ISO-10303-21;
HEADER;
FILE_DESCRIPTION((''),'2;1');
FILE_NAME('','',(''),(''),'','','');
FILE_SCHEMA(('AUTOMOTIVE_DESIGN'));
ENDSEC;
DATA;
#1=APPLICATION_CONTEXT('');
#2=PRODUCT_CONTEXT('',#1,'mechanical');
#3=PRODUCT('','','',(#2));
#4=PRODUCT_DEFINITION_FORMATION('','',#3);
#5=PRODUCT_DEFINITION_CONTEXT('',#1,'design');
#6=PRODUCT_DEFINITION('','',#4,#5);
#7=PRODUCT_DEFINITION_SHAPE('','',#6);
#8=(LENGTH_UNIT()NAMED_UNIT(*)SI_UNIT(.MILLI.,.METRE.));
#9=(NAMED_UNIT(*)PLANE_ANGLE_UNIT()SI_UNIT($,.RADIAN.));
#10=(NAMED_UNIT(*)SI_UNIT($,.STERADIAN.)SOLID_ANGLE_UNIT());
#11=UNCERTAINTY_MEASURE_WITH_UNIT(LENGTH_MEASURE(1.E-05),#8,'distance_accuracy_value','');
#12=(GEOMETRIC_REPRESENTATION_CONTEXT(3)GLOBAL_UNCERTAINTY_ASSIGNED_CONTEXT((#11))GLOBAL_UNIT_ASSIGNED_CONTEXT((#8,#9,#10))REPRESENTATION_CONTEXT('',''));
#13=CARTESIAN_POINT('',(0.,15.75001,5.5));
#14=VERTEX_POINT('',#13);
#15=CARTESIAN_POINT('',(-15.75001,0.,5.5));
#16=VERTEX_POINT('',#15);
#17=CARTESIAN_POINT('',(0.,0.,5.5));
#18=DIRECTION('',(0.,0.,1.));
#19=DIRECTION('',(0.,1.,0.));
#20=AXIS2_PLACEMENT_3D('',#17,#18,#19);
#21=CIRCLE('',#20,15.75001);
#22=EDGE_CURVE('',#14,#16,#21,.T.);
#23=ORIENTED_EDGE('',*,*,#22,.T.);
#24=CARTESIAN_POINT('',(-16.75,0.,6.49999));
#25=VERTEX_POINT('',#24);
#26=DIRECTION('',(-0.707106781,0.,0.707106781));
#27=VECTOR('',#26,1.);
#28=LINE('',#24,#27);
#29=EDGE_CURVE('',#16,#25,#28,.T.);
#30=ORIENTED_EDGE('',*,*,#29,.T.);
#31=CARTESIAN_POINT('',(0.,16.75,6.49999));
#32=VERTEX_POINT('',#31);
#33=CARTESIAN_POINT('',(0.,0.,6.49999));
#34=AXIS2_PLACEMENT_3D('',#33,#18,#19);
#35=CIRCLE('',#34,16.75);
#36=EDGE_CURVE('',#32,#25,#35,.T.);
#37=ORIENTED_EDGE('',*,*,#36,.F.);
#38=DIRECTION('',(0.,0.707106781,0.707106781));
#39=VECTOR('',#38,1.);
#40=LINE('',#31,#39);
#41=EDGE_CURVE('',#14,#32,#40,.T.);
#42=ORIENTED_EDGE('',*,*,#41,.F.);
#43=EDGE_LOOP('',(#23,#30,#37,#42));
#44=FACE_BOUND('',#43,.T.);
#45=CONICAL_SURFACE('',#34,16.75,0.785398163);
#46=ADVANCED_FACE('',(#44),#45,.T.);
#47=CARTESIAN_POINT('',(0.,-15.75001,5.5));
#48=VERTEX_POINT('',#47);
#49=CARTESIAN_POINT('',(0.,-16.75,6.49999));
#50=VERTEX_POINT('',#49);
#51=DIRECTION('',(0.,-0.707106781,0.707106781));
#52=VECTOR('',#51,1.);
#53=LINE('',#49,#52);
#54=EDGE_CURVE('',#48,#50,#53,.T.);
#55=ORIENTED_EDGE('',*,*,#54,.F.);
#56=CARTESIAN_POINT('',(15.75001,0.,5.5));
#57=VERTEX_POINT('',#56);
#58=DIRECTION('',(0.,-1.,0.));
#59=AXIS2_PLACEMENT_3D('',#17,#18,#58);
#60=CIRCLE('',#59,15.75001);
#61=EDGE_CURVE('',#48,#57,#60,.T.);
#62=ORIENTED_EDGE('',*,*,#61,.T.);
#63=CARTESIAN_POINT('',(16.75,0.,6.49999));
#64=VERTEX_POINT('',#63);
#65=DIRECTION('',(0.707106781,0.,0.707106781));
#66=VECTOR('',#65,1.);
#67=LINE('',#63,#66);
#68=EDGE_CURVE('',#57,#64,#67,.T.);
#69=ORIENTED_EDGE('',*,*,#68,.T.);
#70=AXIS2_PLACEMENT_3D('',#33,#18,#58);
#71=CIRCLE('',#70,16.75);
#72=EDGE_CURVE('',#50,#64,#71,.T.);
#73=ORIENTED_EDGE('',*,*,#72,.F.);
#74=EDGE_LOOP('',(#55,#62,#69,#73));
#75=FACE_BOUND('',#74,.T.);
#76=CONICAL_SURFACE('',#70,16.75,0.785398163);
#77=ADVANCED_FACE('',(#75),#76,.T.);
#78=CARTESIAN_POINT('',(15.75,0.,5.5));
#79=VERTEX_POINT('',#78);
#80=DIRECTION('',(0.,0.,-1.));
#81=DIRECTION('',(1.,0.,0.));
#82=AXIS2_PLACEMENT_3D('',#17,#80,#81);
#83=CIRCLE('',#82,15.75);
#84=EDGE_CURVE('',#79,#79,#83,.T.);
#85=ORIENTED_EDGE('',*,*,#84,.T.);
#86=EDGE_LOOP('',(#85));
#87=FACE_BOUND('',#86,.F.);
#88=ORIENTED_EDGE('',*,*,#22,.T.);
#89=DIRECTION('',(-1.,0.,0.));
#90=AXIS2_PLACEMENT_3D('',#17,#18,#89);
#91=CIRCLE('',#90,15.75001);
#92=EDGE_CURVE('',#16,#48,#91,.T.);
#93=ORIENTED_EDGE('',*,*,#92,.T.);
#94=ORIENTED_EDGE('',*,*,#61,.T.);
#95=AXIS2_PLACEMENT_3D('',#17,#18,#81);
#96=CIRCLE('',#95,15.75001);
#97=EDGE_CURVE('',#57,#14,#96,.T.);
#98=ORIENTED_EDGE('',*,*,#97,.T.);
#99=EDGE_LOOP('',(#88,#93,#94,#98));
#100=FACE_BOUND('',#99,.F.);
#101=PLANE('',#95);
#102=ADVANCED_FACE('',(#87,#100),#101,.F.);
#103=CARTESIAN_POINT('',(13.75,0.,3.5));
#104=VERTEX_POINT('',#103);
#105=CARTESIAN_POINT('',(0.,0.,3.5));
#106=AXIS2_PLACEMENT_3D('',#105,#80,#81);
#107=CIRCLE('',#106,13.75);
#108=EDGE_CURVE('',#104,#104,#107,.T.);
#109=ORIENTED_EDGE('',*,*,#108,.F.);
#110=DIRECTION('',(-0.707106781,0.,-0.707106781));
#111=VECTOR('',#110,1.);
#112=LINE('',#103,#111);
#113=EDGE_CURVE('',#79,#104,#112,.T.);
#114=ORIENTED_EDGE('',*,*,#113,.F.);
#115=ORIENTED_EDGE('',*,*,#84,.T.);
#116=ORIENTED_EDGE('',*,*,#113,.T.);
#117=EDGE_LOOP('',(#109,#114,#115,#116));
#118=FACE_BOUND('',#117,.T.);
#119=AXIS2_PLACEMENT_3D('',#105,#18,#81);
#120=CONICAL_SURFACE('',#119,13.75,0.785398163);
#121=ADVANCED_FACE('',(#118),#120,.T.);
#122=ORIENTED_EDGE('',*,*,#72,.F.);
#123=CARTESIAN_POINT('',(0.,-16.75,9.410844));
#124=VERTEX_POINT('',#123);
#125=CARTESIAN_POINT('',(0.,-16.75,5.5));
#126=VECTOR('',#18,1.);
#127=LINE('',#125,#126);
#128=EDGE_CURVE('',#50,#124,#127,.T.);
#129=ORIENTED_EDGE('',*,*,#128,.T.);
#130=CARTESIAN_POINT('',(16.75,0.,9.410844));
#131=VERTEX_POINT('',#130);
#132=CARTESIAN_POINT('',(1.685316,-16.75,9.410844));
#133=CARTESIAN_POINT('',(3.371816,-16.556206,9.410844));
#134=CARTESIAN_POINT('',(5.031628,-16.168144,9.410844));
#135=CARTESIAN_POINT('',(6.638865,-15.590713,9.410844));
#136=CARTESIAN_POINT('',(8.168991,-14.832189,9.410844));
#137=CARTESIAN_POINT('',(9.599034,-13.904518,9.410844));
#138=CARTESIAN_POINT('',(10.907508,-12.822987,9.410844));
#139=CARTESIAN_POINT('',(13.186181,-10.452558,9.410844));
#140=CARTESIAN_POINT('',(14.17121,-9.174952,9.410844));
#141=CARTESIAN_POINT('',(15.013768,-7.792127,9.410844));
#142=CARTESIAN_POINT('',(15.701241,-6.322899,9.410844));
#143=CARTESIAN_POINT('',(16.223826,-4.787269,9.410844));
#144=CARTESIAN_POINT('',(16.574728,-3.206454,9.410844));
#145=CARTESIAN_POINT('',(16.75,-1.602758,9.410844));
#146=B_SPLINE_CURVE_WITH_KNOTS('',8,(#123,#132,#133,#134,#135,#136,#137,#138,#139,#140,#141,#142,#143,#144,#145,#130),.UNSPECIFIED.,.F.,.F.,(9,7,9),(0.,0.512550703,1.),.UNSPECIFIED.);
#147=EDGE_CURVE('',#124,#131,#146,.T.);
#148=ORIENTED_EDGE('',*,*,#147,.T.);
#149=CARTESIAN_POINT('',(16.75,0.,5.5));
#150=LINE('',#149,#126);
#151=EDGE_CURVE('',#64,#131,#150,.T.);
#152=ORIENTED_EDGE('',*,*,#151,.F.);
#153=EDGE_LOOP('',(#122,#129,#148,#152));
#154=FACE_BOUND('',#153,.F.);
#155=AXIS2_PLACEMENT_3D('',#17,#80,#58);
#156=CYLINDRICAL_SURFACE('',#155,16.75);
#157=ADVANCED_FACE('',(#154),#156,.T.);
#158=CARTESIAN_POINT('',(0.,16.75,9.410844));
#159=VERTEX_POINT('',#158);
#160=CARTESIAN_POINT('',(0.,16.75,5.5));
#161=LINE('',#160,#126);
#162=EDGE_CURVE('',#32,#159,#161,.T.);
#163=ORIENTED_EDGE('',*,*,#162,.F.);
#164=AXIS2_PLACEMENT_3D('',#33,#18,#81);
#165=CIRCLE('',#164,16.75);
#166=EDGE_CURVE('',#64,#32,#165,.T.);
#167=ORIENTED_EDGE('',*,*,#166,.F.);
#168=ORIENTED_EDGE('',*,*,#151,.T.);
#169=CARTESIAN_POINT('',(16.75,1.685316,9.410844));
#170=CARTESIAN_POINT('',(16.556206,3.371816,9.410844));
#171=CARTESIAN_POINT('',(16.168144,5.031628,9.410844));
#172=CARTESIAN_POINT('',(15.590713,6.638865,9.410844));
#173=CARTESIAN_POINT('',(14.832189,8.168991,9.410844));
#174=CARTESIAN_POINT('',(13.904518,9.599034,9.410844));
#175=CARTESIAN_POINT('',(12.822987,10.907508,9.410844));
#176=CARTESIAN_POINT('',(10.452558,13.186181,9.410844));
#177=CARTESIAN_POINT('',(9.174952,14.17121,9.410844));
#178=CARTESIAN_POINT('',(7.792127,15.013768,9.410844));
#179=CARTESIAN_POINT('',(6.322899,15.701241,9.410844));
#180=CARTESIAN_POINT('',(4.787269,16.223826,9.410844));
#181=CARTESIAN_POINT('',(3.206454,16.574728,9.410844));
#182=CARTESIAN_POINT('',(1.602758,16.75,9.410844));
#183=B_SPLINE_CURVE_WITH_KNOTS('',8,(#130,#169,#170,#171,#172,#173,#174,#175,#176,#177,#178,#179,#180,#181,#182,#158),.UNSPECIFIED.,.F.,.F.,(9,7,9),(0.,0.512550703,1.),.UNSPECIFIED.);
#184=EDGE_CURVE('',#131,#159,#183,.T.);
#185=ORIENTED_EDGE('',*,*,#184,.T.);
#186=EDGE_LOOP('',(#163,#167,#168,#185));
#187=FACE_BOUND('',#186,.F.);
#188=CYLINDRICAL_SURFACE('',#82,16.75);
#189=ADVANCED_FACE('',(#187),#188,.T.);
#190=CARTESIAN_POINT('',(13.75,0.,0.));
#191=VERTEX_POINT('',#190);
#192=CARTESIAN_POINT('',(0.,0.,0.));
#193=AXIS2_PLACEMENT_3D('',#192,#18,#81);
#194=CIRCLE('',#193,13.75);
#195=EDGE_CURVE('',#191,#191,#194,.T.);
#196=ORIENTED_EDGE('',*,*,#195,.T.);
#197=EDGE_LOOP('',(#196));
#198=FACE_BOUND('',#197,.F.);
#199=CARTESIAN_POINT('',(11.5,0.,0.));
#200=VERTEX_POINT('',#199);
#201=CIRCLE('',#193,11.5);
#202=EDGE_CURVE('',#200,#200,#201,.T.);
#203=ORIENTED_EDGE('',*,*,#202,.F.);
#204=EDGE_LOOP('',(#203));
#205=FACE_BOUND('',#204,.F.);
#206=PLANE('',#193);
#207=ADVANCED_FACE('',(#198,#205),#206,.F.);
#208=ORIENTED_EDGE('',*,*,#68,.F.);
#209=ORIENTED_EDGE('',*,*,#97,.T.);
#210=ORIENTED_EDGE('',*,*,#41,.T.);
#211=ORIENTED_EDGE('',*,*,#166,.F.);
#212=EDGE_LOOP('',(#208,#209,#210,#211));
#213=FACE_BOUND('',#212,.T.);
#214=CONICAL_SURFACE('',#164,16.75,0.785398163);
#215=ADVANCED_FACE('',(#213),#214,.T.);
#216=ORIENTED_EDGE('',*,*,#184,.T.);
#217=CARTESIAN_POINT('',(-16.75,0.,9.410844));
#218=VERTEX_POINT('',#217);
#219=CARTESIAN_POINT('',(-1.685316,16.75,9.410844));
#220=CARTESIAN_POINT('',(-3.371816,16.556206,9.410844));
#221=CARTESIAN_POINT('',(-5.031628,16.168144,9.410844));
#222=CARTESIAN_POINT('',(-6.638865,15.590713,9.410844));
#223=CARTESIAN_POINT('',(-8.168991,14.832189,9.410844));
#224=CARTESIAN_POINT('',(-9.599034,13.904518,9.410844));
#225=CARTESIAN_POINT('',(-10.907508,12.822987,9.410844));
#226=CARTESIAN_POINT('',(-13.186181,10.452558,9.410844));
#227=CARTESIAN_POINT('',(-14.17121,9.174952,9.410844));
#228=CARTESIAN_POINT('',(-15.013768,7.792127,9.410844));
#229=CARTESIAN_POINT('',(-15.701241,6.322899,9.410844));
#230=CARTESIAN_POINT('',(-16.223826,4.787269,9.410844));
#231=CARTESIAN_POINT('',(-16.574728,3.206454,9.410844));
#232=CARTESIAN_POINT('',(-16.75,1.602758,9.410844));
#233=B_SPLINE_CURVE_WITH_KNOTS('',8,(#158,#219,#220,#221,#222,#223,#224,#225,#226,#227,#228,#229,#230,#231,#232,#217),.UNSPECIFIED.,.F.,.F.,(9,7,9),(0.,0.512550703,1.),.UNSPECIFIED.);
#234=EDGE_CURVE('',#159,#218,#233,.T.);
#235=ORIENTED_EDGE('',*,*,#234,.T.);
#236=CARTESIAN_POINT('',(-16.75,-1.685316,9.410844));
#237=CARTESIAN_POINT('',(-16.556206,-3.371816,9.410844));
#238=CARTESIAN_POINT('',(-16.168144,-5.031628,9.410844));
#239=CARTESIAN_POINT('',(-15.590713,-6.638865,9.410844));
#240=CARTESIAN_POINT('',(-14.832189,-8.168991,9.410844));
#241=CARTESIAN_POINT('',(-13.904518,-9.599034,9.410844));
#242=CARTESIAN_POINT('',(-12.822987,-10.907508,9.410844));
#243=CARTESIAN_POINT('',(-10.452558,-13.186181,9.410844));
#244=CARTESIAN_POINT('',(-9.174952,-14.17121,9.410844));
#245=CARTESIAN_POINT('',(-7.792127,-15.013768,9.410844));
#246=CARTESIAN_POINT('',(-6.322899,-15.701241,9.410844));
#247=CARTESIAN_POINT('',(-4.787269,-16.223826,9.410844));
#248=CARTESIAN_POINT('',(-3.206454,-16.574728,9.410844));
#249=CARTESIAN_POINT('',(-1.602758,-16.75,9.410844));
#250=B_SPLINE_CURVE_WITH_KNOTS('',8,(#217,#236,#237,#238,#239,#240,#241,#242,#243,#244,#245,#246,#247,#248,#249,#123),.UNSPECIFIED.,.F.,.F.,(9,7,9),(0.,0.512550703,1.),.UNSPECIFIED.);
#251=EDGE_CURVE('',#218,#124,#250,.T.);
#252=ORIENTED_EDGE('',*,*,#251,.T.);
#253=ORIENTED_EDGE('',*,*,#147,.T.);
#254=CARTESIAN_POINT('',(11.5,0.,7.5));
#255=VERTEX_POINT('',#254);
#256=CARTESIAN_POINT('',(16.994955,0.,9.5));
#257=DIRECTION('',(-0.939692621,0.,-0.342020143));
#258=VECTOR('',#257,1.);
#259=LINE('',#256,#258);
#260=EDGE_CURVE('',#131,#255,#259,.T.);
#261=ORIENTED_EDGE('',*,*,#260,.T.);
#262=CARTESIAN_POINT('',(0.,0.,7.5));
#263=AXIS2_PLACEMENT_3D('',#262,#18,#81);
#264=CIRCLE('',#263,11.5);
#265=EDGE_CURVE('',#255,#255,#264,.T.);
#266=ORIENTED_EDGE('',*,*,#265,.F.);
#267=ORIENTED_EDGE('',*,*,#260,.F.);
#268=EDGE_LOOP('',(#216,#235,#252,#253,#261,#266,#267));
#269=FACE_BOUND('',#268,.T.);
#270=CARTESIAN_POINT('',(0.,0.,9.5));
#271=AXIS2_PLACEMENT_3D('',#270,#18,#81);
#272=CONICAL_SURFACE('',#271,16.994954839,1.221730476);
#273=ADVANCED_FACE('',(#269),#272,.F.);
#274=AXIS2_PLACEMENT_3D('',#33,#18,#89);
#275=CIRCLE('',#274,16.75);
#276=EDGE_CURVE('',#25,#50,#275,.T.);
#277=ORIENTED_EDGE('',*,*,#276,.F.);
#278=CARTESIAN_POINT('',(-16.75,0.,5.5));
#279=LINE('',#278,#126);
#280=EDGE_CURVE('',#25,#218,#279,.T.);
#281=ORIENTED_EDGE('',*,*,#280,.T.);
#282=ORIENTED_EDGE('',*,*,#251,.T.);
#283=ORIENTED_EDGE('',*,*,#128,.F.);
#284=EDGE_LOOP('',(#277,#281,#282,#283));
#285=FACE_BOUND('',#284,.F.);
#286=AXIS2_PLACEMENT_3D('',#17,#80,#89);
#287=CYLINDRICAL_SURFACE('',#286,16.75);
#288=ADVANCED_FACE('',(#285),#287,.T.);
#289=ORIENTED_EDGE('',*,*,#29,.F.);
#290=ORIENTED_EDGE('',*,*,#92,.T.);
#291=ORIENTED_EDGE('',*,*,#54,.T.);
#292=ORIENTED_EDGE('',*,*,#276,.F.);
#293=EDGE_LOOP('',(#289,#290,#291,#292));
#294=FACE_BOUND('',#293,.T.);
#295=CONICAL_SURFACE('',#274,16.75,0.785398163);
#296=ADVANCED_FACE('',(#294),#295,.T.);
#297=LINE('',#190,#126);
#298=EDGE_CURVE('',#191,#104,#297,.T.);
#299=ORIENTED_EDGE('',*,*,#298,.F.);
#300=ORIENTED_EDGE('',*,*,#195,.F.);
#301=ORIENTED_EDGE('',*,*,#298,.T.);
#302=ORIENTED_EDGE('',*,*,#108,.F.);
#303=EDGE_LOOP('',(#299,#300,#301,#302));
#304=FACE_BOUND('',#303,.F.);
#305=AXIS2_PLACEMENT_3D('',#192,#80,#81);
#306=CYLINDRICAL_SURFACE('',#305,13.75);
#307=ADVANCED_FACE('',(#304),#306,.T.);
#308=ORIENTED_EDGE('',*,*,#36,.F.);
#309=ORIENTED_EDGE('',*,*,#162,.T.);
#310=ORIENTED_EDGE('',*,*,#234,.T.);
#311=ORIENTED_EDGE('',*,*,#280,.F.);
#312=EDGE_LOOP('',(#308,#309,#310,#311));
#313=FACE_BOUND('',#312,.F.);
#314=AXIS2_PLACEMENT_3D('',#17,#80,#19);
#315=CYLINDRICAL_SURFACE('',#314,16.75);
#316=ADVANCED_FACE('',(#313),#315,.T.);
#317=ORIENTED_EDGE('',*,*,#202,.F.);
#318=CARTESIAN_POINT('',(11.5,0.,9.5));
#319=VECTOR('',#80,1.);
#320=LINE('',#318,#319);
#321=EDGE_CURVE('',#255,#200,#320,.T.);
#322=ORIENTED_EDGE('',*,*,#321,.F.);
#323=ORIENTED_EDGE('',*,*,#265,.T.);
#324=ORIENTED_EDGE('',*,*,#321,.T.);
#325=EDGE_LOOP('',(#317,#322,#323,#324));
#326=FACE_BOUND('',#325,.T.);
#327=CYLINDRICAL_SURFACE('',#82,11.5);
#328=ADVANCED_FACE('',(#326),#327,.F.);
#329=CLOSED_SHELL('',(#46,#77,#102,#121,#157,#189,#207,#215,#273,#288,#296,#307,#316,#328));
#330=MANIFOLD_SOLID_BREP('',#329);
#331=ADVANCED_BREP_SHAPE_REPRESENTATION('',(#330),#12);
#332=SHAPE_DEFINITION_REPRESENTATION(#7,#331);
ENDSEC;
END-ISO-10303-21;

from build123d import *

# Parameters (mm, degrees)
F0_R     = 13.75
F0_R_2   = 11.5
F1_DEPTH = 8.4
F3_R     = 11.5
F4_DEPTH = 4
F6_SIZE  = 2
F7_SIZE  = 0.99999


# Not quite as in the source:
# - a fillet or chamfer that OpenCascade refuses, or shapes differently, is made with other operations: its cross-section is extruded or revolved along the edge and cut away or added
# - a fillet or chamfer is up to 0.001 mm smaller than in the source, because OpenCascade refuses the exact size


with BuildPart() as f1:
    # F0 (on Top) → F1 (new body)
    with BuildSketch(Plane.XY):
        Circle(F0_R)
        Circle(F0_R_2, mode=Mode.SUBTRACT)
    extrude(amount=F1_DEPTH)

    # F3 (on offset) → F4 (join)
    with BuildSketch(Plane.XY.offset(5.5)):
        with BuildLine():
            ThreePointArc((-16.75, 0), (-11.8440385849, -11.8440385849), (0, -16.75))
            ThreePointArc((0, -16.75), (11.8440385849, -11.8440385849), (16.75, 0))
            ThreePointArc((16.75, 0), (11.8440385849, 11.8440385849), (0, 16.75))
            ThreePointArc((0, 16.75), (-11.8440385849, 11.8440385849), (-16.75, 0))
        make_face()
        Circle(F3_R, mode=Mode.SUBTRACT)
    extrude(amount=F4_DEPTH)

    # F5: chamfer of 2 x 5.4949548389 on 1 edges, made by hand

    # F5_s1 → F5_t2 (revolve, cut)
    with BuildSketch(Plane.XZ):
        Polygon((16.9949548389, 9.5), (11.5, 7.5), (11.5, 9.5), align=None)
    revolve(axis=Axis((0, 0, 9.5), (0, 0, 1)), mode=Mode.SUBTRACT)

    # F6
    f6_edges = [f1.edges().sort_by_distance(p)[0] for p in [
        (-13.75, 0, 5.5),
    ]]
    chamfer(f6_edges, length=F6_SIZE)

    # F7 (size 1 in the source; OpenCascade refuses exactly that, so slightly less here)
    f7_edges = [f1.edges().sort_by_distance(p)[0] for p in [
        (0, 16.75, 5.5),
    ]]
    chamfer(f7_edges, length=F7_SIZE)


solid = f1.part
